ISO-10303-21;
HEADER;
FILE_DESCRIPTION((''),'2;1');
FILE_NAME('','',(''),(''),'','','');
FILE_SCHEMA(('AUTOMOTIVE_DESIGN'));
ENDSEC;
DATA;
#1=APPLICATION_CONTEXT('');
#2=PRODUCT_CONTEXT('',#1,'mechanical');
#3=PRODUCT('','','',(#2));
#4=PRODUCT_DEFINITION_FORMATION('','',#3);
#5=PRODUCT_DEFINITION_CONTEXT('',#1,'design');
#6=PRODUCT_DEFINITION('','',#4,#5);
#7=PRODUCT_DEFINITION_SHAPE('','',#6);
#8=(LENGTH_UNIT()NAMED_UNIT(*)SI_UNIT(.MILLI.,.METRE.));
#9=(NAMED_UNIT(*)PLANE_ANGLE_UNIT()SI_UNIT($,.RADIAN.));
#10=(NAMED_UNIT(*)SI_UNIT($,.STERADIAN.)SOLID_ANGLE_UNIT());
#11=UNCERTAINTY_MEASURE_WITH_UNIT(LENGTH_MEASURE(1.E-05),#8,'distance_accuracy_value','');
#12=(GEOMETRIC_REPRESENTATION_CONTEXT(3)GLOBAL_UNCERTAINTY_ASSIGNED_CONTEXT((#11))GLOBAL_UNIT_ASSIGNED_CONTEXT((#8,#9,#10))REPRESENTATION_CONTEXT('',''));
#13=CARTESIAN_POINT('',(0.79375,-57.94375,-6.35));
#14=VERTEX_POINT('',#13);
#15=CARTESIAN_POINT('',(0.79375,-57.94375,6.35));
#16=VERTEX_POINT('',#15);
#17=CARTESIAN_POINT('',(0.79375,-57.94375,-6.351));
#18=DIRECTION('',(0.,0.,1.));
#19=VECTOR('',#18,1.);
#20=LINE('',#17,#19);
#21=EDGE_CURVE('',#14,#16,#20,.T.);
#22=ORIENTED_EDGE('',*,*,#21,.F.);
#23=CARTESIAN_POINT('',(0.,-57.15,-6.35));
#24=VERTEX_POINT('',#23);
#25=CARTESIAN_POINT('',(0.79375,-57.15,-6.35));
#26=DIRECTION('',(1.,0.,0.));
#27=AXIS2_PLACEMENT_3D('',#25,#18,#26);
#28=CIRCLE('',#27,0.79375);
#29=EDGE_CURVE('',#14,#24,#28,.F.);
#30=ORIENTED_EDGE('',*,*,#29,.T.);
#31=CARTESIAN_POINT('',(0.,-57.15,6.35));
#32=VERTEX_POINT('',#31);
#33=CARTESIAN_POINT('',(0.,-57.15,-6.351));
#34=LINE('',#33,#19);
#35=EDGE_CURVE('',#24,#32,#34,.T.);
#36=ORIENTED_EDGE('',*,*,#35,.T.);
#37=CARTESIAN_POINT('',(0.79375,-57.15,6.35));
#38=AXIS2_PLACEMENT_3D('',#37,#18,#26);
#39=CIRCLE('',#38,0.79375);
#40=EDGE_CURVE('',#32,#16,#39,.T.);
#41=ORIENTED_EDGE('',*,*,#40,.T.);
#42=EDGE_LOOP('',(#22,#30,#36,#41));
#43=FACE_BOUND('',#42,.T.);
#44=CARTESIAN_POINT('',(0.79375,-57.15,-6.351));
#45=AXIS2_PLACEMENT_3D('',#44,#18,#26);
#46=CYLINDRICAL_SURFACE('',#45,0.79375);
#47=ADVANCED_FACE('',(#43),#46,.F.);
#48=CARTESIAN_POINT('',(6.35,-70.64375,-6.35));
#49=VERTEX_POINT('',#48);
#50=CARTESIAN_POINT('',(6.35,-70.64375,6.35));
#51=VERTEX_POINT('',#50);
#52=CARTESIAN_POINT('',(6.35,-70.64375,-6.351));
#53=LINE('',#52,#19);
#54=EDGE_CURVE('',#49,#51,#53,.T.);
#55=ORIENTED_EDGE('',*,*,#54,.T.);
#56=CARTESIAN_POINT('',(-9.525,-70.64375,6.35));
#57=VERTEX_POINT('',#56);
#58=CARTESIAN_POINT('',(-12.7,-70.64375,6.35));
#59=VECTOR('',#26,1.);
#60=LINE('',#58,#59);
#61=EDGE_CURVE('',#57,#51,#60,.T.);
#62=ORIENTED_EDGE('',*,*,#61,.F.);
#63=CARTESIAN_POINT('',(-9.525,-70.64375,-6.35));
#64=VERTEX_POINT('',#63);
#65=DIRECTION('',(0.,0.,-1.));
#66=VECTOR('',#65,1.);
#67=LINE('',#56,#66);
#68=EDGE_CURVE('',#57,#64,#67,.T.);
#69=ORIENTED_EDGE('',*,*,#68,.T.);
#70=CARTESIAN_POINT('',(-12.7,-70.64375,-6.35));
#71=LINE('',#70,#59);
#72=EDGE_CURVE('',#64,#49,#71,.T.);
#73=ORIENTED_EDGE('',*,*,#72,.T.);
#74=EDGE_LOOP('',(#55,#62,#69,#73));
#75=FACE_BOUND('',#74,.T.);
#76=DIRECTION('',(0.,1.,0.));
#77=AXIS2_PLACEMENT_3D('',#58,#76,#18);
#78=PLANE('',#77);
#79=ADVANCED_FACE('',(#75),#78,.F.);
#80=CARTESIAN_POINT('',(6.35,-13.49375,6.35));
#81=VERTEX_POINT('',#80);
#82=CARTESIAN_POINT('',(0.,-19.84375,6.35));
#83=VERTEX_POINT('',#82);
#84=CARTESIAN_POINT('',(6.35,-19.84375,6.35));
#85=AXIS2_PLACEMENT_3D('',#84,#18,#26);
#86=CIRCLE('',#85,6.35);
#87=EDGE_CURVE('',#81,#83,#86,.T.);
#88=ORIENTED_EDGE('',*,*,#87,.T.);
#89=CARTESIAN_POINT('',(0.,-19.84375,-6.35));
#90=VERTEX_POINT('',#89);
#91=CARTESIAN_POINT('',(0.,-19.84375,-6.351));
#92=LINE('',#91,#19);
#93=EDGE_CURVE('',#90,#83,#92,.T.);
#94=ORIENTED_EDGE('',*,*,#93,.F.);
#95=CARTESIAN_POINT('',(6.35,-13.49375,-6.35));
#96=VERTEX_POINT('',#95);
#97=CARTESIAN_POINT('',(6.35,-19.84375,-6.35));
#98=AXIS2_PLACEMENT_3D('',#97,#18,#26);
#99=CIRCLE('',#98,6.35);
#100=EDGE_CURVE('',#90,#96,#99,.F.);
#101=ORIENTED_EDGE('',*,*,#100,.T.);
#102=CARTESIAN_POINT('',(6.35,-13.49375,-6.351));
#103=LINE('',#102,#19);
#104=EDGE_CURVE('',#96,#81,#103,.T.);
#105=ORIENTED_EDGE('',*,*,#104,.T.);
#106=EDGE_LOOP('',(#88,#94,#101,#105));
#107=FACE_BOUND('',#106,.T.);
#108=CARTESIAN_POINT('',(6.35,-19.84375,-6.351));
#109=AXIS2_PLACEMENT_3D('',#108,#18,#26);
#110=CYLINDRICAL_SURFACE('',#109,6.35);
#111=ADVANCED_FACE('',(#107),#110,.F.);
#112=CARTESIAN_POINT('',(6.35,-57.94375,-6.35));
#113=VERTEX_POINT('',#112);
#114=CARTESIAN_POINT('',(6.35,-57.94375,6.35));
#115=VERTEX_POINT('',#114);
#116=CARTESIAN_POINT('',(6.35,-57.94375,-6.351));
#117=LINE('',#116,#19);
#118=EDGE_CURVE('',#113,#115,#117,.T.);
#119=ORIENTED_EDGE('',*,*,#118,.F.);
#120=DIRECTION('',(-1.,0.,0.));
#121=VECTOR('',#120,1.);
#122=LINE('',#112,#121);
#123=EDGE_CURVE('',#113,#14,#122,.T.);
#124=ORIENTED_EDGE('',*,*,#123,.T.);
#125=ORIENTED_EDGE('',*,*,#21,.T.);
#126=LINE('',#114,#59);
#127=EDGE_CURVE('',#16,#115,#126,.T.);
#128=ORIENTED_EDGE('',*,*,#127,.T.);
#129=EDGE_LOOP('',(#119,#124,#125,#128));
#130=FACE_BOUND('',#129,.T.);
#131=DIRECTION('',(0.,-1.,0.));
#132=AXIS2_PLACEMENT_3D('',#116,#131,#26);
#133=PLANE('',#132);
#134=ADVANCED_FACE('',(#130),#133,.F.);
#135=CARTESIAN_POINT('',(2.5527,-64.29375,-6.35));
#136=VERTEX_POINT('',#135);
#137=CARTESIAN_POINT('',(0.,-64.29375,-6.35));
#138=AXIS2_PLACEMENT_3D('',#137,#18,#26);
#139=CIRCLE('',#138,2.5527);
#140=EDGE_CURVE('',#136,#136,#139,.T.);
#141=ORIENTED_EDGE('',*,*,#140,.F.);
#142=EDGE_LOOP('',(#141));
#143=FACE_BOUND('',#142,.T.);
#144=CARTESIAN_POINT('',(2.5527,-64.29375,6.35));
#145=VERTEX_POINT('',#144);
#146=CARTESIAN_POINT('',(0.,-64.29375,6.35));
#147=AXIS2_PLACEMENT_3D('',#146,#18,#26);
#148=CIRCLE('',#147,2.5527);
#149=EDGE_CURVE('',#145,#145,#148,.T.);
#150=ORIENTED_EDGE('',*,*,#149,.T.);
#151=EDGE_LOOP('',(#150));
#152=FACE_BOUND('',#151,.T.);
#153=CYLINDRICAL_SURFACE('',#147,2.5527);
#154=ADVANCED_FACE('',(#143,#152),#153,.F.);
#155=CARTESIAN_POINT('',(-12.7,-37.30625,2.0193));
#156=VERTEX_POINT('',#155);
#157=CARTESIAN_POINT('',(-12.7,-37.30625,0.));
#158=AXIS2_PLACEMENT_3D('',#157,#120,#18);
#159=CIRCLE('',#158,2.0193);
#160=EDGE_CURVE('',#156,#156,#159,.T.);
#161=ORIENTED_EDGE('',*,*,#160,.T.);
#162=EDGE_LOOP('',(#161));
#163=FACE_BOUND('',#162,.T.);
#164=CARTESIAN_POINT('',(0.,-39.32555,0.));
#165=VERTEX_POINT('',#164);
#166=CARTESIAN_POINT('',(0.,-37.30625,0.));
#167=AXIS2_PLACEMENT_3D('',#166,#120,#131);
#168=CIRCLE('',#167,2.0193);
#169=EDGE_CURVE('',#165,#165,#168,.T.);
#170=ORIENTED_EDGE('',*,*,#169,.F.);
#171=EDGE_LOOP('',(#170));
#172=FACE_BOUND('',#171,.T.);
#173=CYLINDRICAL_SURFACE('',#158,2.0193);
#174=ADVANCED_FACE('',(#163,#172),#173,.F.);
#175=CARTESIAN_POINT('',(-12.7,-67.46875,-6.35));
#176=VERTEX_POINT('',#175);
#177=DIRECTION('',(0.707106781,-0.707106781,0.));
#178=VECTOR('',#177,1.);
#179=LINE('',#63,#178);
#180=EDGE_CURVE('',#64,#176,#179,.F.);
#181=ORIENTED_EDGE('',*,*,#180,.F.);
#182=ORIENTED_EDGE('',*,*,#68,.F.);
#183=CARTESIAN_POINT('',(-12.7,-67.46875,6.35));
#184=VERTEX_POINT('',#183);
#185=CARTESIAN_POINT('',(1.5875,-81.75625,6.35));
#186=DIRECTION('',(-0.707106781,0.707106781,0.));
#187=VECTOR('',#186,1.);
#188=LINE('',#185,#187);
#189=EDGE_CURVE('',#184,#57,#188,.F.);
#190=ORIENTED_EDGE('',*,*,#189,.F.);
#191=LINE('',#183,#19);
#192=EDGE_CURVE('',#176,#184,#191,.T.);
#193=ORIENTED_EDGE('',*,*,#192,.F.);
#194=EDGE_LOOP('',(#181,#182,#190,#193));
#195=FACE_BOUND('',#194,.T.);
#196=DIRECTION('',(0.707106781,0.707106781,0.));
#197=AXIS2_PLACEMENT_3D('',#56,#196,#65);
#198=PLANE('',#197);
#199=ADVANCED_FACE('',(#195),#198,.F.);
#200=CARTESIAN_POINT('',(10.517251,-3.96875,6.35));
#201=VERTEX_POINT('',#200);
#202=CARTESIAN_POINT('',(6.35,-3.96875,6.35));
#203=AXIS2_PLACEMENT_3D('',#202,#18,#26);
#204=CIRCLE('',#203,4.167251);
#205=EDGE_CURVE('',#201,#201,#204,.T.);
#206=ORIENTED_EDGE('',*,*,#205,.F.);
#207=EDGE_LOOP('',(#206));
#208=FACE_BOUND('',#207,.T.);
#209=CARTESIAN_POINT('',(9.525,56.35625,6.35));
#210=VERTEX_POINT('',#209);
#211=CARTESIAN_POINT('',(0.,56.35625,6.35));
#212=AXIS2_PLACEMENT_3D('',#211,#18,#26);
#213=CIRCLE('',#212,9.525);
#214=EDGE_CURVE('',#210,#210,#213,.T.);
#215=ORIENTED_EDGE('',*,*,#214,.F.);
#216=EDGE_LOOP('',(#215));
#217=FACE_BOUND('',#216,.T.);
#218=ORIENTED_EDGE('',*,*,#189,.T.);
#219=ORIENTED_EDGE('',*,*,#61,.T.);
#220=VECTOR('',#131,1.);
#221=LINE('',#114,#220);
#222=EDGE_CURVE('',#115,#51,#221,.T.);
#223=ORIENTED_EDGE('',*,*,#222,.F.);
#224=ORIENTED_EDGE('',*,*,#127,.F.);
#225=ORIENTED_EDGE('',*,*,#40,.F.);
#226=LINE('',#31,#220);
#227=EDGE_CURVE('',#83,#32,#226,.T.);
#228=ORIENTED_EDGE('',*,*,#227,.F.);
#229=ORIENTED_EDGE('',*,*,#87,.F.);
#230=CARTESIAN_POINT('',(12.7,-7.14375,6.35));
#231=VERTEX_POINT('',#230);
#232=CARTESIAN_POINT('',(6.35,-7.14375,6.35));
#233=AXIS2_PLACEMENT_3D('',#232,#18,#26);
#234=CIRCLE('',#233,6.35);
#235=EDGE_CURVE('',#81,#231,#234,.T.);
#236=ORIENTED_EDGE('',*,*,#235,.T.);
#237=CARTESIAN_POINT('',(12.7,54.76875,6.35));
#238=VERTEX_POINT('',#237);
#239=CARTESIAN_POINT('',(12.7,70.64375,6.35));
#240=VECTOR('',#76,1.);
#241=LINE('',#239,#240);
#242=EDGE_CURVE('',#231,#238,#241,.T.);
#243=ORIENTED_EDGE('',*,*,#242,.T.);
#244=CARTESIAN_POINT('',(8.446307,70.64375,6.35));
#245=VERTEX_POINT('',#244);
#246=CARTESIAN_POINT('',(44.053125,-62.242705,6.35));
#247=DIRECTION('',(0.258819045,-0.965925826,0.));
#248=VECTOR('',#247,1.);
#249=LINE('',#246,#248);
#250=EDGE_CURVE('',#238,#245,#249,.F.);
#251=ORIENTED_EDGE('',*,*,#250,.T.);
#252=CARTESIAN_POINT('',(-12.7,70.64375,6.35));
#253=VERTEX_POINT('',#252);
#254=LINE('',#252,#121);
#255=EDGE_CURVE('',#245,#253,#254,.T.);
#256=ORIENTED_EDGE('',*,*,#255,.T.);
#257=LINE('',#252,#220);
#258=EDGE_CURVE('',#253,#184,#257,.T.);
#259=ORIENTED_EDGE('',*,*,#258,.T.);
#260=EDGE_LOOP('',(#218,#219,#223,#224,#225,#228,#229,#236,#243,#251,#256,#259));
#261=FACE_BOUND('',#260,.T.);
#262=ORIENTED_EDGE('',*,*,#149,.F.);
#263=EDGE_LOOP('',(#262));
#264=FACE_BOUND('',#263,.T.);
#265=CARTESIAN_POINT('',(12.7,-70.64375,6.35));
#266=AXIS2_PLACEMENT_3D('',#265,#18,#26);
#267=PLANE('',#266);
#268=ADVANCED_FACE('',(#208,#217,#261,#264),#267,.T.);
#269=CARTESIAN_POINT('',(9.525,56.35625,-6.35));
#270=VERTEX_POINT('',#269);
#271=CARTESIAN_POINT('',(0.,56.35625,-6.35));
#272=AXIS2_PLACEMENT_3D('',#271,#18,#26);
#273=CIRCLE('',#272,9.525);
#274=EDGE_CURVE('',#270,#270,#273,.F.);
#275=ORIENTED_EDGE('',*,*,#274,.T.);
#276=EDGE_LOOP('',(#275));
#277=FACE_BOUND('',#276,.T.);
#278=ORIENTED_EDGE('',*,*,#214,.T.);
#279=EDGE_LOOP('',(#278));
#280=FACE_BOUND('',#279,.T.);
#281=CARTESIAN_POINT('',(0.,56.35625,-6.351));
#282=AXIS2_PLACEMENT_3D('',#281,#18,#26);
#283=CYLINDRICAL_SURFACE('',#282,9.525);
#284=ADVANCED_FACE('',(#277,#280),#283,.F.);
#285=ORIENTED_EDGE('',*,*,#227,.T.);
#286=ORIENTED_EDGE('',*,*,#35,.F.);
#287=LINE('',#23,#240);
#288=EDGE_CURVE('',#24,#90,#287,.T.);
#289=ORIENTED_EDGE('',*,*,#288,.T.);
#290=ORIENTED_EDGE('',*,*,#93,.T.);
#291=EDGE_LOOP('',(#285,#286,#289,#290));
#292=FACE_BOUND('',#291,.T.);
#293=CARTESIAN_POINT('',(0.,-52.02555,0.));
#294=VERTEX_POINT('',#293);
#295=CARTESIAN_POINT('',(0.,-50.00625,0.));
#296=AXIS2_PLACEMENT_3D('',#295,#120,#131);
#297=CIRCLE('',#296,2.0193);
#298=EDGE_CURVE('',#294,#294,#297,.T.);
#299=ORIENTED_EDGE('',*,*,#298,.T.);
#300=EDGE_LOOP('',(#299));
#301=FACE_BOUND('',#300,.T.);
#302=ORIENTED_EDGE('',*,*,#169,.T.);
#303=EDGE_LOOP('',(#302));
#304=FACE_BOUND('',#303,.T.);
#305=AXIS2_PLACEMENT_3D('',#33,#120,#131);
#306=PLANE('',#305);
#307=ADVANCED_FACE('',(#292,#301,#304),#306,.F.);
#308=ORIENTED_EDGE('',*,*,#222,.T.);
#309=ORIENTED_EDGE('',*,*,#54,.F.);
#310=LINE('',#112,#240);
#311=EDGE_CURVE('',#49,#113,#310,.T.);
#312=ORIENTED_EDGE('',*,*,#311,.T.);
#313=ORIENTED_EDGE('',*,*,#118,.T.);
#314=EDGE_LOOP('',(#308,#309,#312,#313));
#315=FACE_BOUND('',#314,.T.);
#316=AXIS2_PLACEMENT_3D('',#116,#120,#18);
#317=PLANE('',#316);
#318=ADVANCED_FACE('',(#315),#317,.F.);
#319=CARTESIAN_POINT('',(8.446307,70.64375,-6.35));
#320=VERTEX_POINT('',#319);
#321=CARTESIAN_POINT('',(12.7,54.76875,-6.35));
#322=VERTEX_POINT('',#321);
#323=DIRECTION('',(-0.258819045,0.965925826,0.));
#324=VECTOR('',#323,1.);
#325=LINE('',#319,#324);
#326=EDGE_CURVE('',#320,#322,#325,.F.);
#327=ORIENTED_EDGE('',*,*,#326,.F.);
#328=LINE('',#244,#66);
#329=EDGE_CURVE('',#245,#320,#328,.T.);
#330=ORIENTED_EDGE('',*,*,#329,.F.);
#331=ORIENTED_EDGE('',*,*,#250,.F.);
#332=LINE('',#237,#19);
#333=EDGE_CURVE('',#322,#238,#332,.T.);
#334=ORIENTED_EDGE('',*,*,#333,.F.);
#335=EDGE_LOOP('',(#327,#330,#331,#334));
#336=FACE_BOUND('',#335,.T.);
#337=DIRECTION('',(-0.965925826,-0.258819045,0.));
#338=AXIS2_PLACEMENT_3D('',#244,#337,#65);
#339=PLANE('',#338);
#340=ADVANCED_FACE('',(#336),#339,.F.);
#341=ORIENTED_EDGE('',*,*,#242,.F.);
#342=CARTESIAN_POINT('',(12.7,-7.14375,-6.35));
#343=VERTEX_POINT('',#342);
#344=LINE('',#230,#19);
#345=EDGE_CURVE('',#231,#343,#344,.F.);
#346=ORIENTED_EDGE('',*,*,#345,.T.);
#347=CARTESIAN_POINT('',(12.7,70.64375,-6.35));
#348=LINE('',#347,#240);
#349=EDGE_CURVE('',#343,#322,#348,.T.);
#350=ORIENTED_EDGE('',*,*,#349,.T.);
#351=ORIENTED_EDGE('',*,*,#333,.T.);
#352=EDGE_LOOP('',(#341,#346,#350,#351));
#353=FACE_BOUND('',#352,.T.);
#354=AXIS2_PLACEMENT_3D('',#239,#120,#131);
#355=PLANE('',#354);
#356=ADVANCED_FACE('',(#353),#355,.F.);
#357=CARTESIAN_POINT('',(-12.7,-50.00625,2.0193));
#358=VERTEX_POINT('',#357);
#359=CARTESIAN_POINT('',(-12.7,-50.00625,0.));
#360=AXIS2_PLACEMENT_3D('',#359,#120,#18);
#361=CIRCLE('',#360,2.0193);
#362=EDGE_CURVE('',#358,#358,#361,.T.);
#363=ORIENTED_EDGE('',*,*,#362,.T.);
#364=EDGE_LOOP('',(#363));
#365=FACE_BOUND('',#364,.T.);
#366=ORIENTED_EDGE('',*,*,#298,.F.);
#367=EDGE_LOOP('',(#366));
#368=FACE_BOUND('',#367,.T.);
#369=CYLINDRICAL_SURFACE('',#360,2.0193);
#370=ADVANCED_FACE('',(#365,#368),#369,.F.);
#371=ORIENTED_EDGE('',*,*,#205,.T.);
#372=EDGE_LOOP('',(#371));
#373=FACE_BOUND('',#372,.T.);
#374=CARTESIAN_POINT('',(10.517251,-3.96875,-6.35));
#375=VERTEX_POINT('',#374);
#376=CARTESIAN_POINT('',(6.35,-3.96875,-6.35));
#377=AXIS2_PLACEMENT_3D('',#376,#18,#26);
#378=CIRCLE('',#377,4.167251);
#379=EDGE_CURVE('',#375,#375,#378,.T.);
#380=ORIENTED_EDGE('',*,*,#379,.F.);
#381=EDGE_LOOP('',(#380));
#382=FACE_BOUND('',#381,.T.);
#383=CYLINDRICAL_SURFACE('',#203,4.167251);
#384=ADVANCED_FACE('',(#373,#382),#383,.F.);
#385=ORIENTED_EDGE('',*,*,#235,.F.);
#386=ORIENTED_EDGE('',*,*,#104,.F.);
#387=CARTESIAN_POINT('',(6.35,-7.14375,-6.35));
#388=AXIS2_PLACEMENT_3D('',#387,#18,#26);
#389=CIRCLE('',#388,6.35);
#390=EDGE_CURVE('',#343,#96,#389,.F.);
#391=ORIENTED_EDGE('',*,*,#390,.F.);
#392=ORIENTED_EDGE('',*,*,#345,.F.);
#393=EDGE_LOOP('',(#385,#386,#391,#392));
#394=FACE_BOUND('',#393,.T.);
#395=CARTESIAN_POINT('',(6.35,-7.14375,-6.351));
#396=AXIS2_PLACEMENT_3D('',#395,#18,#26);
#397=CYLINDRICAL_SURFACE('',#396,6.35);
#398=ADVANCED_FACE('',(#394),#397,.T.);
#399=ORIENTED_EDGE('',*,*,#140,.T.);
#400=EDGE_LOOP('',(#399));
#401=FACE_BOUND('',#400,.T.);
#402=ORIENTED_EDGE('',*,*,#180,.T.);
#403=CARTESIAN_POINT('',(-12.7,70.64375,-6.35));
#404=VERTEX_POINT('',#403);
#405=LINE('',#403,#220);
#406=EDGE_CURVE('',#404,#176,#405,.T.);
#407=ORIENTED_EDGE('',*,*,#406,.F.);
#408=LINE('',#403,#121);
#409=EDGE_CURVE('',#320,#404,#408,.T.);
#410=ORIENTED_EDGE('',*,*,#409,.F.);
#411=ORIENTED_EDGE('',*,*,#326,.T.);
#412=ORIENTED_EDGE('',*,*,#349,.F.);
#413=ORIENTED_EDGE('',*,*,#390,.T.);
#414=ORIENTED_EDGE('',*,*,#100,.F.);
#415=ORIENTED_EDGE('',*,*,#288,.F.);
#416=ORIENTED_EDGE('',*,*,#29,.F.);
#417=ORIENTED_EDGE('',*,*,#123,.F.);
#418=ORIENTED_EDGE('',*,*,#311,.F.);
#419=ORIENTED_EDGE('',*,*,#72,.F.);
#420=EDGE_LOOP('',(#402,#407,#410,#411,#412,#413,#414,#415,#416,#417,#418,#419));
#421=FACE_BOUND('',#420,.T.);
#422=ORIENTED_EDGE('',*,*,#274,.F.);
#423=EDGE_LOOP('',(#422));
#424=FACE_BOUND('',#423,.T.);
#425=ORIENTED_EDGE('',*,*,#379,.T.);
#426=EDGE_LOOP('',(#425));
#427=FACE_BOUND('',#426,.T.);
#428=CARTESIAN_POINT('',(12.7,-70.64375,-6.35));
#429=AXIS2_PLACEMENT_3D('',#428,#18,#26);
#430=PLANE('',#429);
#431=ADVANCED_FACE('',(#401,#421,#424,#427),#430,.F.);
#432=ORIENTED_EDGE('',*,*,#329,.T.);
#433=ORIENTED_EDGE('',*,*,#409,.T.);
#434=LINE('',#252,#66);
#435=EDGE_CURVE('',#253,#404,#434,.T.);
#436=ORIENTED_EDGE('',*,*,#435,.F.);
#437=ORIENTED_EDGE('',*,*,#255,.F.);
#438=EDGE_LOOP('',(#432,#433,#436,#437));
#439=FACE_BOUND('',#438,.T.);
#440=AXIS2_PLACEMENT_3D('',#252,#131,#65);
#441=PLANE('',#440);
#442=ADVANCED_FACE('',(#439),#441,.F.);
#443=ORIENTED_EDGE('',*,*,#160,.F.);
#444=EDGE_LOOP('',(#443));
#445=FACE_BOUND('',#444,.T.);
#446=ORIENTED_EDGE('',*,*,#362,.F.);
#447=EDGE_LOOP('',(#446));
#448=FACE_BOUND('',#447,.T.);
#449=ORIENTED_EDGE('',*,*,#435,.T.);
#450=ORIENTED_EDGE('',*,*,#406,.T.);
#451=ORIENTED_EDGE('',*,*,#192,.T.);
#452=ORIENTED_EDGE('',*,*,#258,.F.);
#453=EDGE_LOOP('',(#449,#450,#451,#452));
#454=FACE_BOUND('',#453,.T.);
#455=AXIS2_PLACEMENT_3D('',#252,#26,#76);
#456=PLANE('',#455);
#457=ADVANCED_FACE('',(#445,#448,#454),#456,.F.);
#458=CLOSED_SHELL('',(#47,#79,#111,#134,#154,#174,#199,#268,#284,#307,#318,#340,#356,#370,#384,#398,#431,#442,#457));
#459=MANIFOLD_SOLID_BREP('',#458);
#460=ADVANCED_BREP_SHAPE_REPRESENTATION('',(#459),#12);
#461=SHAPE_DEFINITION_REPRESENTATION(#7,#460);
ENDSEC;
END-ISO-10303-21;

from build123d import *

# Parameters (mm, degrees)
SKETCH1_W                        = 25.4
SKETCH1_H                        = 141.2875
EXTRUDE1_DEPTH                   = 6.35
CUT_EXTRUDE1_REACH               = 74.891
SKETCH2_R                        = 9.525
CUT_EXTRUDE2_REACH               = 74.891
CHAMFER1_SIZE                    = 15.875
CHAMFER1_SIZE2                   = 4.25369343
F_21_64_0_32813_DIAMETER_HOLE1_D = 8.334502
F_1_4_20_TAPPED_HOLE1_D          = 5.1054
F_10_32_TAPPED_HOLE1_D           = 4.0386
F_10_32_TAPPED_HOLE1_DEPTH       = 13.716
F_10_32_TAPPED_HOLE1_TIP         = 1.213317848
FILLET1_R                        = 6.35
CHAMFER2_SIZE                    = 3.175


with BuildPart() as part:
    # Sketch1 → Extrude1 (new, symmetric)
    with BuildSketch(Plane.XY):
        Rectangle(SKETCH1_W, SKETCH1_H)
    extrude(amount=EXTRUDE1_DEPTH, both=True)

    # Sketch2 → Cut-Extrude1 (cut, up to next)
    with BuildSketch(Plane.XY.offset(6.35), mode=Mode.PRIVATE) as cut_extrude1_sk1:
        with Locations((0, 56.35625)):
            Circle(SKETCH2_R)
    cut_extrude1_tool1 = extrude(cut_extrude1_sk1.sketch, amount=-CUT_EXTRUDE1_REACH, mode=Mode.PRIVATE) & part.part
    add(cut_extrude1_tool1.solids().sort_by_distance((0, 56.35625, 6.35))[0], mode=Mode.SUBTRACT)

    # Sketch3 → Cut-Extrude2 (cut, up to next)
    with BuildSketch(Plane.XY.offset(6.35), mode=Mode.PRIVATE) as cut_extrude2_sk1:
        with BuildLine():
            Line((6.35, -57.94375), (0.79375, -57.94375))
            ThreePointArc((0.79375, -57.94375), (0.232483992, -57.711266008), (0, -57.15))
            Line((0, -57.15), (0, -19.84375))
            ThreePointArc((0, -19.84375), (1.859871939, -15.353621939), (6.35, -13.49375))
            Line((6.35, -13.49375), (12.7, -13.49375))
            Line((12.7, -13.49375), (12.7, -70.64375))
            Line((12.7, -70.64375), (6.35, -70.64375))
            Line((6.35, -70.64375), (6.35, -57.94375))
        make_face()
    cut_extrude2_tool1 = extrude(cut_extrude2_sk1.sketch, amount=-CUT_EXTRUDE2_REACH, mode=Mode.PRIVATE) & part.part
    add(cut_extrude2_tool1.solids().sort_by_distance((6.820727, -39.618194, 6.35))[0], mode=Mode.SUBTRACT)

    # Chamfer1
    chamfer1_edges = [part.edges().sort_by_distance(p)[0] for p in [
        (12.7, 70.64375, 0),
    ]]
    chamfer1_side = [part.faces().sort_by_distance(p)[0] for p in [
        (12.7, 28.575, 0),
    ]]
    chamfer(chamfer1_edges, length=CHAMFER1_SIZE, length2=CHAMFER1_SIZE2, reference=chamfer1_side[0])

    # 21/64 (0.32813) Diameter Hole1 (through all)
    with Locations(Plane.XY.offset(6.35)):
        with Locations((6.35, -3.96875)):
            Hole(F_21_64_0_32813_DIAMETER_HOLE1_D / 2)

    # 1/4-20 Tapped Hole1 (through all)
    with Locations(Plane.XY.offset(6.35)):
        with Locations((0, -64.29375)):
            Hole(F_1_4_20_TAPPED_HOLE1_D / 2)

    # #10-32 Tapped Hole1
    with Locations(Plane.ZY.offset(12.7)):
        with Locations((0, -50.00625), (0, -37.30625)):
            Hole(F_10_32_TAPPED_HOLE1_D / 2, depth=F_10_32_TAPPED_HOLE1_DEPTH)
            with Locations((0, 0, -(F_10_32_TAPPED_HOLE1_DEPTH + F_10_32_TAPPED_HOLE1_TIP / 2))):  # 118° drill point
                Cone(0, F_10_32_TAPPED_HOLE1_D / 2, F_10_32_TAPPED_HOLE1_TIP, mode=Mode.SUBTRACT)

    # Fillet1
    fillet1_edges = [part.edges().sort_by_distance(p)[0] for p in [
        (12.7, -13.49375, 0),
    ]]
    fillet(fillet1_edges, radius=FILLET1_R - 0.0001)  # a hair under: the kernel refuses the full size

    # Chamfer2
    chamfer2_edges = [part.edges().sort_by_distance(p)[0] for p in [
        (-12.7, -70.64375, 0),
    ]]
    chamfer(chamfer2_edges, length=CHAMFER2_SIZE)


solid = part.part
